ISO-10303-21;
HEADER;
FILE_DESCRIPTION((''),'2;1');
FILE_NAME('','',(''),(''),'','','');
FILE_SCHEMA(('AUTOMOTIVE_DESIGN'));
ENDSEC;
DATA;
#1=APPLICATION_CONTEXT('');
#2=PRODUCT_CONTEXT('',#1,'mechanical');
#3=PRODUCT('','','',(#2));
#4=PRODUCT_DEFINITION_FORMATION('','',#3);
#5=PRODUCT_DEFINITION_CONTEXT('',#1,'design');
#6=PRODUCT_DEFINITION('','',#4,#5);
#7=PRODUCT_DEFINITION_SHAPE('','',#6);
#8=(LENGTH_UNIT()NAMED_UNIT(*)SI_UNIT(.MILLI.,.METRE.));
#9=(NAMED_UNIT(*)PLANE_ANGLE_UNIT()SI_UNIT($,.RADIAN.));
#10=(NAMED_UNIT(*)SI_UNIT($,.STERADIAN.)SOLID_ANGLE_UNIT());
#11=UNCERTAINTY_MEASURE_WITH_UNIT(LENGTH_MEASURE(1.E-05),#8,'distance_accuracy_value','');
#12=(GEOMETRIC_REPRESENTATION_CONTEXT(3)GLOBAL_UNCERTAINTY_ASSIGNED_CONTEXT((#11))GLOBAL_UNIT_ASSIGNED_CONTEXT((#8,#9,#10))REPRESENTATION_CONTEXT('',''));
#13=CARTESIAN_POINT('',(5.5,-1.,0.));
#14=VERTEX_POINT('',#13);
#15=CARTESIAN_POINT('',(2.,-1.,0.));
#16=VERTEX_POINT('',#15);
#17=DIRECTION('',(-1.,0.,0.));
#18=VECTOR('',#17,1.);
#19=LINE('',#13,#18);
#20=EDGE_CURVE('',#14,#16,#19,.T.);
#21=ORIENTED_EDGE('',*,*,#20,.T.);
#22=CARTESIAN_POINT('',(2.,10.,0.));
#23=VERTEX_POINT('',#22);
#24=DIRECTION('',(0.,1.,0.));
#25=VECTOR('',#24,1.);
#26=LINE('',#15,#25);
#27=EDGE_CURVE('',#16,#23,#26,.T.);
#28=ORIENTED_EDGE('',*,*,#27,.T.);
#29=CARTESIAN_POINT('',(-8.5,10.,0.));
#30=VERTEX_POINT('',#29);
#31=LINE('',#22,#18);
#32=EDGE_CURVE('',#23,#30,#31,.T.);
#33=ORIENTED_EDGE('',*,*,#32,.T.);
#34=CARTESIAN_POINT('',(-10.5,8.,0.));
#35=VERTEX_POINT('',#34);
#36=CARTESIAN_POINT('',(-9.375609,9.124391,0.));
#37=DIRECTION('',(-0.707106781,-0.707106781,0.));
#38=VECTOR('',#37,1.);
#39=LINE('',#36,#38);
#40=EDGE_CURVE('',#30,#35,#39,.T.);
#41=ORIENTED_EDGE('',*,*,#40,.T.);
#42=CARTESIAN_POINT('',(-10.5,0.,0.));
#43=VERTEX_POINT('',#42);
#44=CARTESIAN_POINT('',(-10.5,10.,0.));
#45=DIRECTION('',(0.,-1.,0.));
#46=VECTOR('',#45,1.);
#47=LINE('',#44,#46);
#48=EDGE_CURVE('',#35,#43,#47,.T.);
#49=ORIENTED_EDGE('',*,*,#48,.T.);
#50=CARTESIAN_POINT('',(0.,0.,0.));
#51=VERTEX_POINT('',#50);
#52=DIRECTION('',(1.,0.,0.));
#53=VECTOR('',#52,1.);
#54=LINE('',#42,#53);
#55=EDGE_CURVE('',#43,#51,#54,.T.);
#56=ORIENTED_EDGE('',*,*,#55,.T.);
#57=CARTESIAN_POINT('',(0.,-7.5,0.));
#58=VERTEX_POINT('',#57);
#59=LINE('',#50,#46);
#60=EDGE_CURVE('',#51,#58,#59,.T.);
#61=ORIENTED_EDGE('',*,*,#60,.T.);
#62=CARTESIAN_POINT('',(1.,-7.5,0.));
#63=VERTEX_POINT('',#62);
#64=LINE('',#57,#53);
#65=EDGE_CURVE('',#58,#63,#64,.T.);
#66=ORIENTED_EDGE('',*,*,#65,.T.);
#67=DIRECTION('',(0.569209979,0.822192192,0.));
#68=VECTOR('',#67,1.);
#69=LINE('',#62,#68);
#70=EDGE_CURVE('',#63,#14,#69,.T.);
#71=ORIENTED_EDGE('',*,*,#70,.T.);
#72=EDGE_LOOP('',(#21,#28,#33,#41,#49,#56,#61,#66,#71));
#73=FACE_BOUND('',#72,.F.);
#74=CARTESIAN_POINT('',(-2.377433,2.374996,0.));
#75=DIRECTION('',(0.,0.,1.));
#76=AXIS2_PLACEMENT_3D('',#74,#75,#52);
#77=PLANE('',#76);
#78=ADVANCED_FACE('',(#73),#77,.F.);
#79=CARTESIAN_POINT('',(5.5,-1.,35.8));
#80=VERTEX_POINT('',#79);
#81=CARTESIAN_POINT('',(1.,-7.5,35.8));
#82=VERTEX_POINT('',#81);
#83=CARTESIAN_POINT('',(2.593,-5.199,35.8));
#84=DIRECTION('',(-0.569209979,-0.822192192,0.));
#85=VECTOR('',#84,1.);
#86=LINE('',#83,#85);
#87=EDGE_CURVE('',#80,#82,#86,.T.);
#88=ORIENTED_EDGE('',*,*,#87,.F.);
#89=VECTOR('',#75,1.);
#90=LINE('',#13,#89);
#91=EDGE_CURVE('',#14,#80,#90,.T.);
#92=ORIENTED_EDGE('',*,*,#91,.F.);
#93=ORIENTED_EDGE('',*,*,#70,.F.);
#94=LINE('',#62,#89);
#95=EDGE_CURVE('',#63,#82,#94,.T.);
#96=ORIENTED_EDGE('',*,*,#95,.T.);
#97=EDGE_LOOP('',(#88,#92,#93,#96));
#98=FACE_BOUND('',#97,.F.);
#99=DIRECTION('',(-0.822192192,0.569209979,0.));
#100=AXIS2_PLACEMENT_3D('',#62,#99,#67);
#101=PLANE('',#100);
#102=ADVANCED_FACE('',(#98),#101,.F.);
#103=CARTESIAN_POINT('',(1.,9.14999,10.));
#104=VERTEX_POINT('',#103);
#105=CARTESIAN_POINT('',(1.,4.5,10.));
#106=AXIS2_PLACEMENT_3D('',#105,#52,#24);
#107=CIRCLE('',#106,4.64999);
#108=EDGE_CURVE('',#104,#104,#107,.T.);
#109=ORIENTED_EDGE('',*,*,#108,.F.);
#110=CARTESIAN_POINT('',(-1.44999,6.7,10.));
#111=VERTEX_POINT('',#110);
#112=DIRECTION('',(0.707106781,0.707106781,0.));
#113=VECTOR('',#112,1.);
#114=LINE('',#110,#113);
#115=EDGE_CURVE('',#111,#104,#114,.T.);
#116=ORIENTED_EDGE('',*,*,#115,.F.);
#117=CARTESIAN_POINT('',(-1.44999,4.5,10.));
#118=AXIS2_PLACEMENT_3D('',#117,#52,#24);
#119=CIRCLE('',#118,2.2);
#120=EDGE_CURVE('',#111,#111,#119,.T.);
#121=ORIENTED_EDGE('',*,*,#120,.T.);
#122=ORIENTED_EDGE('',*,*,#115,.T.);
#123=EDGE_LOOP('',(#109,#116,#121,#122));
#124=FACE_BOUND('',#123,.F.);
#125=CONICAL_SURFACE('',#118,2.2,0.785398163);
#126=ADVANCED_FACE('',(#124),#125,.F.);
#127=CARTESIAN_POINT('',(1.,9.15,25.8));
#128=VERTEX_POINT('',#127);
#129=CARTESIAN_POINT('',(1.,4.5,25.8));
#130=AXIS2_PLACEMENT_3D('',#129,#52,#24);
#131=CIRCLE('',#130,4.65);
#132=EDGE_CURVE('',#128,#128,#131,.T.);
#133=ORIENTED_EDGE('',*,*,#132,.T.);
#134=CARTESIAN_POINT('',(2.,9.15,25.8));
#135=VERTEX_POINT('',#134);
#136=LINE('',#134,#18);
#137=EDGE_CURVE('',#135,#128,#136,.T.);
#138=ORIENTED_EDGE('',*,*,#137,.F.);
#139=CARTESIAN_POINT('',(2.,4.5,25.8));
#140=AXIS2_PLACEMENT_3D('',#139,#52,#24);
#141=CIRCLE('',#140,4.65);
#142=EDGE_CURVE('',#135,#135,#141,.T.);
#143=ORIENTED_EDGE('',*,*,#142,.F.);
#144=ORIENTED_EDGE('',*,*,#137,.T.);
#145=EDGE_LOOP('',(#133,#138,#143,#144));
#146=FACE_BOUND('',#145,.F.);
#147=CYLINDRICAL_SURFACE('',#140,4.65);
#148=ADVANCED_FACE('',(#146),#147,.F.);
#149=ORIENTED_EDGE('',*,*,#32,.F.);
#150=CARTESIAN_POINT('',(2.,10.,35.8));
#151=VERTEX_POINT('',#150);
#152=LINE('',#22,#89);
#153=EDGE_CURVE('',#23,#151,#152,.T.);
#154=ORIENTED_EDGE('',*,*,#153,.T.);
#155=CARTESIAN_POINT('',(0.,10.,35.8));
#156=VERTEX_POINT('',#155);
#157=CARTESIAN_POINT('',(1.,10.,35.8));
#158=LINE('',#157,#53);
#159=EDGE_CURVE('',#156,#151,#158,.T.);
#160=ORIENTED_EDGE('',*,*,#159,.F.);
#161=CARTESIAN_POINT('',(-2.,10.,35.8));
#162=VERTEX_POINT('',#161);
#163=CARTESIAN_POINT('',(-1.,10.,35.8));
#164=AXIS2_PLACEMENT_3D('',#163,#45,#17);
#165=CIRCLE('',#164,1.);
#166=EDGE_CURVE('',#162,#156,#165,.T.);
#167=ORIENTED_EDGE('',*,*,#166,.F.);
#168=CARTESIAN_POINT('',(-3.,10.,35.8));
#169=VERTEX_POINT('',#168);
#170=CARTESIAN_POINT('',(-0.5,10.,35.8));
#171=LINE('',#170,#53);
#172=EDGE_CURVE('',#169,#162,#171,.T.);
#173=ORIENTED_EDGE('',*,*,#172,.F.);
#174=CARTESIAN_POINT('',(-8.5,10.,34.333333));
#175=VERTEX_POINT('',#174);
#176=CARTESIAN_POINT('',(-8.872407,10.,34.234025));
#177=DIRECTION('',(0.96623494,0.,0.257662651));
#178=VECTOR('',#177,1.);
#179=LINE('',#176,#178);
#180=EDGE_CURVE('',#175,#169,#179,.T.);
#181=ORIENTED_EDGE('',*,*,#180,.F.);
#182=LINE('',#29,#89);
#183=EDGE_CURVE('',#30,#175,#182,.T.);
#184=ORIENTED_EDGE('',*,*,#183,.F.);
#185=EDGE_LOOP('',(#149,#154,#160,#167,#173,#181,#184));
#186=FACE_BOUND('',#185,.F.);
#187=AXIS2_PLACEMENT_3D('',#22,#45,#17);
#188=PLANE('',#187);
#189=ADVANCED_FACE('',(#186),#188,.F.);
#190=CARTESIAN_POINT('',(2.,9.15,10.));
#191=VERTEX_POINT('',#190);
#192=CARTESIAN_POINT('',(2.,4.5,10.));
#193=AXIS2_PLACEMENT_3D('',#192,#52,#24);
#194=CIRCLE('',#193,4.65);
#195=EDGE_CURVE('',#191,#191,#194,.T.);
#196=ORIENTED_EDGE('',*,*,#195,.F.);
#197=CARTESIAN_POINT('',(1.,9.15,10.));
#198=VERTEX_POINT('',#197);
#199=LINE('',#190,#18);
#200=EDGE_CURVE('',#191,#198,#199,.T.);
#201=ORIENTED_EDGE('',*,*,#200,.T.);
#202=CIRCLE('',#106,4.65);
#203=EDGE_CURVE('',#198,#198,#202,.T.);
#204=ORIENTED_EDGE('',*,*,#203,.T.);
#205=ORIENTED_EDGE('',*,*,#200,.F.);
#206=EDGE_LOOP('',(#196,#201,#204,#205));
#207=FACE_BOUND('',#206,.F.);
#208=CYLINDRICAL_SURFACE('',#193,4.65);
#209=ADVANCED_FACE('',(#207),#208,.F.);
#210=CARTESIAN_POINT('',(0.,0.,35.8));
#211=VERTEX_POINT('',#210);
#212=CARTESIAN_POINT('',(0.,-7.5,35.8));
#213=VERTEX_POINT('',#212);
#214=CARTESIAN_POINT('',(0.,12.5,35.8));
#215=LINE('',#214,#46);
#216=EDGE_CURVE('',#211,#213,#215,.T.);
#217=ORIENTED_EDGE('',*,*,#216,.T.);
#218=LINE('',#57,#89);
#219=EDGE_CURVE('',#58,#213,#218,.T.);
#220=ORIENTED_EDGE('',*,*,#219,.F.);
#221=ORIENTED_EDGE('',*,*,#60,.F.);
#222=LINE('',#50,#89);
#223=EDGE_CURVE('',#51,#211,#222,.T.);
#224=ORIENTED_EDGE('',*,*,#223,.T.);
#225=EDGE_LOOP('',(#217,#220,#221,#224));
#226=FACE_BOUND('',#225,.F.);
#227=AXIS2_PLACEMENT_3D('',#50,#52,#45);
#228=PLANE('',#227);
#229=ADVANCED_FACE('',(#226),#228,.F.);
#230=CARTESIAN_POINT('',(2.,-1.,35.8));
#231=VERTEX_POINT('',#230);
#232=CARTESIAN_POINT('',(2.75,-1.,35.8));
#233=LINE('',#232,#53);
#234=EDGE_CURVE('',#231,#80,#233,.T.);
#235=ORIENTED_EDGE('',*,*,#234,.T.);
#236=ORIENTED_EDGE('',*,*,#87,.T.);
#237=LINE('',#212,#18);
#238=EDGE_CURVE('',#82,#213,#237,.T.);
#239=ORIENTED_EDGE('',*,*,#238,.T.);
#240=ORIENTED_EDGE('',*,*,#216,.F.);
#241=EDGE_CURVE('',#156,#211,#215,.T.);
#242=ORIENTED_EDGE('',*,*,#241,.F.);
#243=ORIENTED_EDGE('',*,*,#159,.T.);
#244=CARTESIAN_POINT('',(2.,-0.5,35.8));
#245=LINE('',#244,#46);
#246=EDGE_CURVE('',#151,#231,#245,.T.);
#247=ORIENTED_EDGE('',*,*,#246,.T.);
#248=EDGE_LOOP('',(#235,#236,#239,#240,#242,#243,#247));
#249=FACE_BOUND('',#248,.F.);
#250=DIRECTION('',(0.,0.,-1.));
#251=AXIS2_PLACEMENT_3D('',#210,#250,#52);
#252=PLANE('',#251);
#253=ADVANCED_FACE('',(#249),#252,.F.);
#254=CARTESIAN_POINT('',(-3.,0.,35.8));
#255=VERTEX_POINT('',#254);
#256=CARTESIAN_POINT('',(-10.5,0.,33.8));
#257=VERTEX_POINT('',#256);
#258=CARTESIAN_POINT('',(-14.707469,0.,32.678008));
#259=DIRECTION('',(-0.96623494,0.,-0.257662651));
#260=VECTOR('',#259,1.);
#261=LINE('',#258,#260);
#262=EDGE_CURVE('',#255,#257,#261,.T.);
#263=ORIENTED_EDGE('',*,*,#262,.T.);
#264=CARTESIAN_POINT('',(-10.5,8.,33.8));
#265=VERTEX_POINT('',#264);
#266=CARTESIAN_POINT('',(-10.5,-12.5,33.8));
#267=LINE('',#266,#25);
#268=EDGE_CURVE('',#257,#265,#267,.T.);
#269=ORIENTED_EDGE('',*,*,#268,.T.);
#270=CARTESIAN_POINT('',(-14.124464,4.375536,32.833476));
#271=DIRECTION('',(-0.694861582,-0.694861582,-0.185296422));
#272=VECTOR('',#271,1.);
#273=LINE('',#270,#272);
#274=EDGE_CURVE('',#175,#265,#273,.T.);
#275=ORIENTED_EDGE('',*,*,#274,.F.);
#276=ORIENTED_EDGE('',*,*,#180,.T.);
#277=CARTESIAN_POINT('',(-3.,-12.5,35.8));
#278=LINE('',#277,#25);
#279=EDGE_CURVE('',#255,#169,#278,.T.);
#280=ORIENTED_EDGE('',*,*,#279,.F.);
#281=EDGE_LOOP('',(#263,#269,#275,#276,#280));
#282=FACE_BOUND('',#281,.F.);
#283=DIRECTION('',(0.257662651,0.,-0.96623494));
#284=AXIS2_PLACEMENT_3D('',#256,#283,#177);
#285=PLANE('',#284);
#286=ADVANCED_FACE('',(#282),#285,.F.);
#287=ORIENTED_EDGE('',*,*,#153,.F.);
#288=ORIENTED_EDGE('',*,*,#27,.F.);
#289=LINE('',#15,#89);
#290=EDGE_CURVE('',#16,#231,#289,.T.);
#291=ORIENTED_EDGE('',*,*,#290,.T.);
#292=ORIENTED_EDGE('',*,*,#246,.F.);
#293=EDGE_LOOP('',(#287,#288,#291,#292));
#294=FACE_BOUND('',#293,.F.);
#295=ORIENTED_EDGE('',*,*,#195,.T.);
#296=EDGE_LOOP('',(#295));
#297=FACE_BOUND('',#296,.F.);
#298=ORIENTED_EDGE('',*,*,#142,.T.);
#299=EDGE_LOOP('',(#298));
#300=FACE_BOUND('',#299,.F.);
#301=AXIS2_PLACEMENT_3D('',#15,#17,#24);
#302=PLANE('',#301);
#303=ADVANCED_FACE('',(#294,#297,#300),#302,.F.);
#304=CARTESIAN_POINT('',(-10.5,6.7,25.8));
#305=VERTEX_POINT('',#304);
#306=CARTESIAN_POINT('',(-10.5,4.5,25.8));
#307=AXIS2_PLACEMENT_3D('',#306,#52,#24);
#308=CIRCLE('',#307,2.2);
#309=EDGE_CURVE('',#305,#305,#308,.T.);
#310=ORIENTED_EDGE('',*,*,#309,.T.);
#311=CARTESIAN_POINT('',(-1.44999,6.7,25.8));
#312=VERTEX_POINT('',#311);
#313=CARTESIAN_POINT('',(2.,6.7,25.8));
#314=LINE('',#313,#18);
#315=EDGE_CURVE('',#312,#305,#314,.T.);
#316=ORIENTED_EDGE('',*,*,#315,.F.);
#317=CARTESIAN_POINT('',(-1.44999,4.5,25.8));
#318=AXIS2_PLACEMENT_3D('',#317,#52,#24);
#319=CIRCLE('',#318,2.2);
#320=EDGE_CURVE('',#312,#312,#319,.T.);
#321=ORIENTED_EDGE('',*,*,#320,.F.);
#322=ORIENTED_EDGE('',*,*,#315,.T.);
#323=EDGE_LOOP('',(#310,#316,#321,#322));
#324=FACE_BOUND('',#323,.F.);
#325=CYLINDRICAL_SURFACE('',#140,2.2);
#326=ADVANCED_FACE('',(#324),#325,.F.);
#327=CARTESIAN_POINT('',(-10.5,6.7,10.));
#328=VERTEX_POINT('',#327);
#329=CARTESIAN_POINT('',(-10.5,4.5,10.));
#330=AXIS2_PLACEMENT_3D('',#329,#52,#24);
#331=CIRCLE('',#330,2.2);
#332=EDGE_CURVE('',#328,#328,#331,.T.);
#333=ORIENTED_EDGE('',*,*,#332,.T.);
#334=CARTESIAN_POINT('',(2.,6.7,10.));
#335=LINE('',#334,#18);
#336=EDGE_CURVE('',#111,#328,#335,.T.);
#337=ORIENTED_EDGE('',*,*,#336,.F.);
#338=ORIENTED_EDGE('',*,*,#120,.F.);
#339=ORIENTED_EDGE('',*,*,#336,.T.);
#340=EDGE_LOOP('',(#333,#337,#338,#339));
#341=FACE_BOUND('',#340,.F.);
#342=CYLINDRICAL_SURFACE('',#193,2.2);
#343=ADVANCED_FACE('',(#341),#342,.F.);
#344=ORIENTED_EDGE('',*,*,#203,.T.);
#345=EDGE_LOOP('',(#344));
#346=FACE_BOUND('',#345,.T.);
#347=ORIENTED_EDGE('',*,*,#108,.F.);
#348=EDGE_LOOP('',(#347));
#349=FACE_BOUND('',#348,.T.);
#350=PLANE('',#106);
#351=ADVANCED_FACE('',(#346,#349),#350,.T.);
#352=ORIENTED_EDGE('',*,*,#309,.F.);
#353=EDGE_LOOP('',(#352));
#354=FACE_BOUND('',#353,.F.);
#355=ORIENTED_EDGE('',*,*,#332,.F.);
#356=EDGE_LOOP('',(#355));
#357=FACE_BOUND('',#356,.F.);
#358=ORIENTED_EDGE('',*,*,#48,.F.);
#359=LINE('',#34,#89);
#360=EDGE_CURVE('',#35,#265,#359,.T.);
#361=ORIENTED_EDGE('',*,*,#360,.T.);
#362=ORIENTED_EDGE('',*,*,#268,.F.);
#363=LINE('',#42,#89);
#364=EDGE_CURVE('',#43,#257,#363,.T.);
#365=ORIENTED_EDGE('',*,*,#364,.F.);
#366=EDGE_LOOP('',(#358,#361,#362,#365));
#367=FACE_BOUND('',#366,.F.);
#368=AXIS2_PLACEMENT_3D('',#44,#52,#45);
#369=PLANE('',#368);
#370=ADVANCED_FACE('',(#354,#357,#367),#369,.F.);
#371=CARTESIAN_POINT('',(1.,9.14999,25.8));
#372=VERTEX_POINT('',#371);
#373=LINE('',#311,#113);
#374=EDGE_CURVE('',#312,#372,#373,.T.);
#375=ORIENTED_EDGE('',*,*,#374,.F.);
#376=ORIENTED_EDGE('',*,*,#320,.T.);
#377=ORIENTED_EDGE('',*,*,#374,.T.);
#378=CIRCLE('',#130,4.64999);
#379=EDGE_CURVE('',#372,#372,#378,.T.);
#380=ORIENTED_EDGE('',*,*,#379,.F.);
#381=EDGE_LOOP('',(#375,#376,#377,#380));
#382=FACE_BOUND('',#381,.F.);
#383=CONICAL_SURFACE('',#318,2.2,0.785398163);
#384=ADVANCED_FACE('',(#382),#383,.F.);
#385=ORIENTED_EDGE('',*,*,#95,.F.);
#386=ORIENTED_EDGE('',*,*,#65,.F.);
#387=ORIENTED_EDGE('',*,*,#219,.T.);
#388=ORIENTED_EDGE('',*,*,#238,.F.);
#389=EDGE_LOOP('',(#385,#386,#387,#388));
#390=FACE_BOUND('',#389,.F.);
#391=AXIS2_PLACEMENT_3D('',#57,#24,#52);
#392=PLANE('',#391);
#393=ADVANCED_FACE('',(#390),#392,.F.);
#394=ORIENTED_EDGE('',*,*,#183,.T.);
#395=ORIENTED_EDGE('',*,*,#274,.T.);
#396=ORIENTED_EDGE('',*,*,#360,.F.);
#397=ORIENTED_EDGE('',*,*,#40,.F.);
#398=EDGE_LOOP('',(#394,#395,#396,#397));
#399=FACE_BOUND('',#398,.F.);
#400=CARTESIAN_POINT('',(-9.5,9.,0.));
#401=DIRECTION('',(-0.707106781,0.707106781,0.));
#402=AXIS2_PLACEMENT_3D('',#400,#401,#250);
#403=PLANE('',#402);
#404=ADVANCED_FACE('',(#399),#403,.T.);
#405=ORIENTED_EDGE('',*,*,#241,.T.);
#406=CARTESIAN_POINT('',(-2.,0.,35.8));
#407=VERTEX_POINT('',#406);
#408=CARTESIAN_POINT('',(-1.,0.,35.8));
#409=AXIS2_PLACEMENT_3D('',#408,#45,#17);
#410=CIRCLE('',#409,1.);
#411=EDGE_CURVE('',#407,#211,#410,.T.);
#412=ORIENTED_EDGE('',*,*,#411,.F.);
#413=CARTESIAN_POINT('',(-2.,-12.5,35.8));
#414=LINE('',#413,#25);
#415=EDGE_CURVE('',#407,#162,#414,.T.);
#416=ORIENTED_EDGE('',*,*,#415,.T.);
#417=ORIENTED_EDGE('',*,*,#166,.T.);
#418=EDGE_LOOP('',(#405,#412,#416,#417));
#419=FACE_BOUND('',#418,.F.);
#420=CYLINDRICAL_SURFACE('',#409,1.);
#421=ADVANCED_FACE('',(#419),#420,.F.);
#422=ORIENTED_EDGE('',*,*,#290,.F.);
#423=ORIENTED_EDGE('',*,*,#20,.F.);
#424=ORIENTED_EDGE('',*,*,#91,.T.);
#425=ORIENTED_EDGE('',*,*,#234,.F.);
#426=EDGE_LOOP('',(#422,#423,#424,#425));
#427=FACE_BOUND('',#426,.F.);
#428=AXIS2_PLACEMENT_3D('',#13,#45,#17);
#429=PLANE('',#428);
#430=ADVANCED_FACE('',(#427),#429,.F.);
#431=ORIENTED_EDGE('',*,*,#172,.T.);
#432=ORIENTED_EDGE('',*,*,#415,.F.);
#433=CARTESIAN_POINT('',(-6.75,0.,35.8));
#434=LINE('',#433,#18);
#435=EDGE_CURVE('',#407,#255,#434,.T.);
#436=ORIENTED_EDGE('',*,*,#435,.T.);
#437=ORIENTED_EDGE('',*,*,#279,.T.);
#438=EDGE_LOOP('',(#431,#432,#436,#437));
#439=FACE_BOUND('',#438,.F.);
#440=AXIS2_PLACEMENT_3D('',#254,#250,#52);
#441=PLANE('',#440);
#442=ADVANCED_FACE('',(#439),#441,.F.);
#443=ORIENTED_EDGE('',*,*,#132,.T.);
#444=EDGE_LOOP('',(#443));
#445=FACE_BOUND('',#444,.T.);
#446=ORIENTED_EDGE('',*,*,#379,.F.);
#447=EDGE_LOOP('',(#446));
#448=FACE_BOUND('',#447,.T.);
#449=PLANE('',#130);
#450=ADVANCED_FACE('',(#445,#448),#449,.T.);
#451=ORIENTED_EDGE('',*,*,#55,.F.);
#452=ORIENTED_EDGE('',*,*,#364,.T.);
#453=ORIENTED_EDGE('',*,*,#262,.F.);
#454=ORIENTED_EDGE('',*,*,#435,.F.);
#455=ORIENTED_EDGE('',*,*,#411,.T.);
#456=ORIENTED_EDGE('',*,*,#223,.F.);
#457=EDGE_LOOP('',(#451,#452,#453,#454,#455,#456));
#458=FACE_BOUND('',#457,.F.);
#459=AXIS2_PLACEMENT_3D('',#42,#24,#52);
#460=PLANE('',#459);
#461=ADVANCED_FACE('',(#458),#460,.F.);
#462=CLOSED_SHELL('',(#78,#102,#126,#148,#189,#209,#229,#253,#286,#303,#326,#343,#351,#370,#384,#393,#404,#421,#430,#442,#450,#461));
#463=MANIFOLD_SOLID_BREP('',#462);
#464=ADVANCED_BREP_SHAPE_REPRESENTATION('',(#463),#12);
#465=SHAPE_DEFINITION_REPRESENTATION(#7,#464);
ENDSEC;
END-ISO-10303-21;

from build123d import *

# Parameters (mm, degrees)
F1_DEPTH = 40
F3_DEPTH = 12.5
F4_R     = 2.2
F5_DEPTH = 12.501
F7_SIZE  = 2
F6_R     = 4.65
F8_DEPTH = 1
F9_SIZE  = 2.44999


# Not quite as in the source:
# - a fillet or chamfer is up to 0.001 mm smaller than in the source, because OpenCascade refuses the exact size


with BuildPart() as f1:
    # F0 (on Top) → F1 (new body)
    with BuildSketch(Plane.XY):
        Polygon((2, 10), (-10.5, 10), (-10.5, 0), (0, 0), (0, -7.5), (1, -7.5), (5.5, -1), (2, -1), align=None)
    extrude(amount=F1_DEPTH)

    # F2 (on face) → F3 (cut, symmetric)
    with BuildSketch(Plane.XZ):
        with BuildLine():
            ThreePointArc((-2, 35.8), (-1, 34.8), (0, 35.8))
            Line((0, 35.8), (5.5, 35.8))
            Line((5.5, 35.8), (5.5, 40))
            Line((5.5, 40), (-10.5, 40))
            Line((-10.5, 40), (-10.5, 33.8))
            Line((-10.5, 33.8), (-3, 35.8))
            Line((-3, 35.8), (-2, 35.8))
        make_face()
    extrude(amount=F3_DEPTH, both=True, mode=Mode.SUBTRACT)

    # F4 (on face) → F5 (cut, through all)
    with BuildSketch(Plane.YZ.offset(2)):
        with Locations((4.5, 25.8)):
            Circle(F4_R)
        with Locations((4.5, 10)):
            Circle(F4_R)
    extrude(amount=-F5_DEPTH, mode=Mode.SUBTRACT)

    # F7
    f7_edges = [f1.edges().sort_by_distance(p)[0] for p in [
        (-10.5, 10, 16.9),
    ]]
    chamfer(f7_edges, length=F7_SIZE)

    # F6 (on face) → F8 (cut)
    with BuildSketch(Plane.YZ.offset(2)):
        with Locations((4.5, 25.8)):
            Circle(F6_R)
        with Locations((4.5, 10)):
            Circle(F6_R)
    extrude(amount=-F8_DEPTH, mode=Mode.SUBTRACT)

    # F9 (size 2.45 in the source; OpenCascade refuses exactly that, so slightly less here)
    f9_edges = [f1.edges().sort_by_distance(p)[0] for p in [
        (1, 2.3, 25.8),
        (1, 2.3, 10),
    ]]
    chamfer(f9_edges, length=F9_SIZE)


solid = f1.part
